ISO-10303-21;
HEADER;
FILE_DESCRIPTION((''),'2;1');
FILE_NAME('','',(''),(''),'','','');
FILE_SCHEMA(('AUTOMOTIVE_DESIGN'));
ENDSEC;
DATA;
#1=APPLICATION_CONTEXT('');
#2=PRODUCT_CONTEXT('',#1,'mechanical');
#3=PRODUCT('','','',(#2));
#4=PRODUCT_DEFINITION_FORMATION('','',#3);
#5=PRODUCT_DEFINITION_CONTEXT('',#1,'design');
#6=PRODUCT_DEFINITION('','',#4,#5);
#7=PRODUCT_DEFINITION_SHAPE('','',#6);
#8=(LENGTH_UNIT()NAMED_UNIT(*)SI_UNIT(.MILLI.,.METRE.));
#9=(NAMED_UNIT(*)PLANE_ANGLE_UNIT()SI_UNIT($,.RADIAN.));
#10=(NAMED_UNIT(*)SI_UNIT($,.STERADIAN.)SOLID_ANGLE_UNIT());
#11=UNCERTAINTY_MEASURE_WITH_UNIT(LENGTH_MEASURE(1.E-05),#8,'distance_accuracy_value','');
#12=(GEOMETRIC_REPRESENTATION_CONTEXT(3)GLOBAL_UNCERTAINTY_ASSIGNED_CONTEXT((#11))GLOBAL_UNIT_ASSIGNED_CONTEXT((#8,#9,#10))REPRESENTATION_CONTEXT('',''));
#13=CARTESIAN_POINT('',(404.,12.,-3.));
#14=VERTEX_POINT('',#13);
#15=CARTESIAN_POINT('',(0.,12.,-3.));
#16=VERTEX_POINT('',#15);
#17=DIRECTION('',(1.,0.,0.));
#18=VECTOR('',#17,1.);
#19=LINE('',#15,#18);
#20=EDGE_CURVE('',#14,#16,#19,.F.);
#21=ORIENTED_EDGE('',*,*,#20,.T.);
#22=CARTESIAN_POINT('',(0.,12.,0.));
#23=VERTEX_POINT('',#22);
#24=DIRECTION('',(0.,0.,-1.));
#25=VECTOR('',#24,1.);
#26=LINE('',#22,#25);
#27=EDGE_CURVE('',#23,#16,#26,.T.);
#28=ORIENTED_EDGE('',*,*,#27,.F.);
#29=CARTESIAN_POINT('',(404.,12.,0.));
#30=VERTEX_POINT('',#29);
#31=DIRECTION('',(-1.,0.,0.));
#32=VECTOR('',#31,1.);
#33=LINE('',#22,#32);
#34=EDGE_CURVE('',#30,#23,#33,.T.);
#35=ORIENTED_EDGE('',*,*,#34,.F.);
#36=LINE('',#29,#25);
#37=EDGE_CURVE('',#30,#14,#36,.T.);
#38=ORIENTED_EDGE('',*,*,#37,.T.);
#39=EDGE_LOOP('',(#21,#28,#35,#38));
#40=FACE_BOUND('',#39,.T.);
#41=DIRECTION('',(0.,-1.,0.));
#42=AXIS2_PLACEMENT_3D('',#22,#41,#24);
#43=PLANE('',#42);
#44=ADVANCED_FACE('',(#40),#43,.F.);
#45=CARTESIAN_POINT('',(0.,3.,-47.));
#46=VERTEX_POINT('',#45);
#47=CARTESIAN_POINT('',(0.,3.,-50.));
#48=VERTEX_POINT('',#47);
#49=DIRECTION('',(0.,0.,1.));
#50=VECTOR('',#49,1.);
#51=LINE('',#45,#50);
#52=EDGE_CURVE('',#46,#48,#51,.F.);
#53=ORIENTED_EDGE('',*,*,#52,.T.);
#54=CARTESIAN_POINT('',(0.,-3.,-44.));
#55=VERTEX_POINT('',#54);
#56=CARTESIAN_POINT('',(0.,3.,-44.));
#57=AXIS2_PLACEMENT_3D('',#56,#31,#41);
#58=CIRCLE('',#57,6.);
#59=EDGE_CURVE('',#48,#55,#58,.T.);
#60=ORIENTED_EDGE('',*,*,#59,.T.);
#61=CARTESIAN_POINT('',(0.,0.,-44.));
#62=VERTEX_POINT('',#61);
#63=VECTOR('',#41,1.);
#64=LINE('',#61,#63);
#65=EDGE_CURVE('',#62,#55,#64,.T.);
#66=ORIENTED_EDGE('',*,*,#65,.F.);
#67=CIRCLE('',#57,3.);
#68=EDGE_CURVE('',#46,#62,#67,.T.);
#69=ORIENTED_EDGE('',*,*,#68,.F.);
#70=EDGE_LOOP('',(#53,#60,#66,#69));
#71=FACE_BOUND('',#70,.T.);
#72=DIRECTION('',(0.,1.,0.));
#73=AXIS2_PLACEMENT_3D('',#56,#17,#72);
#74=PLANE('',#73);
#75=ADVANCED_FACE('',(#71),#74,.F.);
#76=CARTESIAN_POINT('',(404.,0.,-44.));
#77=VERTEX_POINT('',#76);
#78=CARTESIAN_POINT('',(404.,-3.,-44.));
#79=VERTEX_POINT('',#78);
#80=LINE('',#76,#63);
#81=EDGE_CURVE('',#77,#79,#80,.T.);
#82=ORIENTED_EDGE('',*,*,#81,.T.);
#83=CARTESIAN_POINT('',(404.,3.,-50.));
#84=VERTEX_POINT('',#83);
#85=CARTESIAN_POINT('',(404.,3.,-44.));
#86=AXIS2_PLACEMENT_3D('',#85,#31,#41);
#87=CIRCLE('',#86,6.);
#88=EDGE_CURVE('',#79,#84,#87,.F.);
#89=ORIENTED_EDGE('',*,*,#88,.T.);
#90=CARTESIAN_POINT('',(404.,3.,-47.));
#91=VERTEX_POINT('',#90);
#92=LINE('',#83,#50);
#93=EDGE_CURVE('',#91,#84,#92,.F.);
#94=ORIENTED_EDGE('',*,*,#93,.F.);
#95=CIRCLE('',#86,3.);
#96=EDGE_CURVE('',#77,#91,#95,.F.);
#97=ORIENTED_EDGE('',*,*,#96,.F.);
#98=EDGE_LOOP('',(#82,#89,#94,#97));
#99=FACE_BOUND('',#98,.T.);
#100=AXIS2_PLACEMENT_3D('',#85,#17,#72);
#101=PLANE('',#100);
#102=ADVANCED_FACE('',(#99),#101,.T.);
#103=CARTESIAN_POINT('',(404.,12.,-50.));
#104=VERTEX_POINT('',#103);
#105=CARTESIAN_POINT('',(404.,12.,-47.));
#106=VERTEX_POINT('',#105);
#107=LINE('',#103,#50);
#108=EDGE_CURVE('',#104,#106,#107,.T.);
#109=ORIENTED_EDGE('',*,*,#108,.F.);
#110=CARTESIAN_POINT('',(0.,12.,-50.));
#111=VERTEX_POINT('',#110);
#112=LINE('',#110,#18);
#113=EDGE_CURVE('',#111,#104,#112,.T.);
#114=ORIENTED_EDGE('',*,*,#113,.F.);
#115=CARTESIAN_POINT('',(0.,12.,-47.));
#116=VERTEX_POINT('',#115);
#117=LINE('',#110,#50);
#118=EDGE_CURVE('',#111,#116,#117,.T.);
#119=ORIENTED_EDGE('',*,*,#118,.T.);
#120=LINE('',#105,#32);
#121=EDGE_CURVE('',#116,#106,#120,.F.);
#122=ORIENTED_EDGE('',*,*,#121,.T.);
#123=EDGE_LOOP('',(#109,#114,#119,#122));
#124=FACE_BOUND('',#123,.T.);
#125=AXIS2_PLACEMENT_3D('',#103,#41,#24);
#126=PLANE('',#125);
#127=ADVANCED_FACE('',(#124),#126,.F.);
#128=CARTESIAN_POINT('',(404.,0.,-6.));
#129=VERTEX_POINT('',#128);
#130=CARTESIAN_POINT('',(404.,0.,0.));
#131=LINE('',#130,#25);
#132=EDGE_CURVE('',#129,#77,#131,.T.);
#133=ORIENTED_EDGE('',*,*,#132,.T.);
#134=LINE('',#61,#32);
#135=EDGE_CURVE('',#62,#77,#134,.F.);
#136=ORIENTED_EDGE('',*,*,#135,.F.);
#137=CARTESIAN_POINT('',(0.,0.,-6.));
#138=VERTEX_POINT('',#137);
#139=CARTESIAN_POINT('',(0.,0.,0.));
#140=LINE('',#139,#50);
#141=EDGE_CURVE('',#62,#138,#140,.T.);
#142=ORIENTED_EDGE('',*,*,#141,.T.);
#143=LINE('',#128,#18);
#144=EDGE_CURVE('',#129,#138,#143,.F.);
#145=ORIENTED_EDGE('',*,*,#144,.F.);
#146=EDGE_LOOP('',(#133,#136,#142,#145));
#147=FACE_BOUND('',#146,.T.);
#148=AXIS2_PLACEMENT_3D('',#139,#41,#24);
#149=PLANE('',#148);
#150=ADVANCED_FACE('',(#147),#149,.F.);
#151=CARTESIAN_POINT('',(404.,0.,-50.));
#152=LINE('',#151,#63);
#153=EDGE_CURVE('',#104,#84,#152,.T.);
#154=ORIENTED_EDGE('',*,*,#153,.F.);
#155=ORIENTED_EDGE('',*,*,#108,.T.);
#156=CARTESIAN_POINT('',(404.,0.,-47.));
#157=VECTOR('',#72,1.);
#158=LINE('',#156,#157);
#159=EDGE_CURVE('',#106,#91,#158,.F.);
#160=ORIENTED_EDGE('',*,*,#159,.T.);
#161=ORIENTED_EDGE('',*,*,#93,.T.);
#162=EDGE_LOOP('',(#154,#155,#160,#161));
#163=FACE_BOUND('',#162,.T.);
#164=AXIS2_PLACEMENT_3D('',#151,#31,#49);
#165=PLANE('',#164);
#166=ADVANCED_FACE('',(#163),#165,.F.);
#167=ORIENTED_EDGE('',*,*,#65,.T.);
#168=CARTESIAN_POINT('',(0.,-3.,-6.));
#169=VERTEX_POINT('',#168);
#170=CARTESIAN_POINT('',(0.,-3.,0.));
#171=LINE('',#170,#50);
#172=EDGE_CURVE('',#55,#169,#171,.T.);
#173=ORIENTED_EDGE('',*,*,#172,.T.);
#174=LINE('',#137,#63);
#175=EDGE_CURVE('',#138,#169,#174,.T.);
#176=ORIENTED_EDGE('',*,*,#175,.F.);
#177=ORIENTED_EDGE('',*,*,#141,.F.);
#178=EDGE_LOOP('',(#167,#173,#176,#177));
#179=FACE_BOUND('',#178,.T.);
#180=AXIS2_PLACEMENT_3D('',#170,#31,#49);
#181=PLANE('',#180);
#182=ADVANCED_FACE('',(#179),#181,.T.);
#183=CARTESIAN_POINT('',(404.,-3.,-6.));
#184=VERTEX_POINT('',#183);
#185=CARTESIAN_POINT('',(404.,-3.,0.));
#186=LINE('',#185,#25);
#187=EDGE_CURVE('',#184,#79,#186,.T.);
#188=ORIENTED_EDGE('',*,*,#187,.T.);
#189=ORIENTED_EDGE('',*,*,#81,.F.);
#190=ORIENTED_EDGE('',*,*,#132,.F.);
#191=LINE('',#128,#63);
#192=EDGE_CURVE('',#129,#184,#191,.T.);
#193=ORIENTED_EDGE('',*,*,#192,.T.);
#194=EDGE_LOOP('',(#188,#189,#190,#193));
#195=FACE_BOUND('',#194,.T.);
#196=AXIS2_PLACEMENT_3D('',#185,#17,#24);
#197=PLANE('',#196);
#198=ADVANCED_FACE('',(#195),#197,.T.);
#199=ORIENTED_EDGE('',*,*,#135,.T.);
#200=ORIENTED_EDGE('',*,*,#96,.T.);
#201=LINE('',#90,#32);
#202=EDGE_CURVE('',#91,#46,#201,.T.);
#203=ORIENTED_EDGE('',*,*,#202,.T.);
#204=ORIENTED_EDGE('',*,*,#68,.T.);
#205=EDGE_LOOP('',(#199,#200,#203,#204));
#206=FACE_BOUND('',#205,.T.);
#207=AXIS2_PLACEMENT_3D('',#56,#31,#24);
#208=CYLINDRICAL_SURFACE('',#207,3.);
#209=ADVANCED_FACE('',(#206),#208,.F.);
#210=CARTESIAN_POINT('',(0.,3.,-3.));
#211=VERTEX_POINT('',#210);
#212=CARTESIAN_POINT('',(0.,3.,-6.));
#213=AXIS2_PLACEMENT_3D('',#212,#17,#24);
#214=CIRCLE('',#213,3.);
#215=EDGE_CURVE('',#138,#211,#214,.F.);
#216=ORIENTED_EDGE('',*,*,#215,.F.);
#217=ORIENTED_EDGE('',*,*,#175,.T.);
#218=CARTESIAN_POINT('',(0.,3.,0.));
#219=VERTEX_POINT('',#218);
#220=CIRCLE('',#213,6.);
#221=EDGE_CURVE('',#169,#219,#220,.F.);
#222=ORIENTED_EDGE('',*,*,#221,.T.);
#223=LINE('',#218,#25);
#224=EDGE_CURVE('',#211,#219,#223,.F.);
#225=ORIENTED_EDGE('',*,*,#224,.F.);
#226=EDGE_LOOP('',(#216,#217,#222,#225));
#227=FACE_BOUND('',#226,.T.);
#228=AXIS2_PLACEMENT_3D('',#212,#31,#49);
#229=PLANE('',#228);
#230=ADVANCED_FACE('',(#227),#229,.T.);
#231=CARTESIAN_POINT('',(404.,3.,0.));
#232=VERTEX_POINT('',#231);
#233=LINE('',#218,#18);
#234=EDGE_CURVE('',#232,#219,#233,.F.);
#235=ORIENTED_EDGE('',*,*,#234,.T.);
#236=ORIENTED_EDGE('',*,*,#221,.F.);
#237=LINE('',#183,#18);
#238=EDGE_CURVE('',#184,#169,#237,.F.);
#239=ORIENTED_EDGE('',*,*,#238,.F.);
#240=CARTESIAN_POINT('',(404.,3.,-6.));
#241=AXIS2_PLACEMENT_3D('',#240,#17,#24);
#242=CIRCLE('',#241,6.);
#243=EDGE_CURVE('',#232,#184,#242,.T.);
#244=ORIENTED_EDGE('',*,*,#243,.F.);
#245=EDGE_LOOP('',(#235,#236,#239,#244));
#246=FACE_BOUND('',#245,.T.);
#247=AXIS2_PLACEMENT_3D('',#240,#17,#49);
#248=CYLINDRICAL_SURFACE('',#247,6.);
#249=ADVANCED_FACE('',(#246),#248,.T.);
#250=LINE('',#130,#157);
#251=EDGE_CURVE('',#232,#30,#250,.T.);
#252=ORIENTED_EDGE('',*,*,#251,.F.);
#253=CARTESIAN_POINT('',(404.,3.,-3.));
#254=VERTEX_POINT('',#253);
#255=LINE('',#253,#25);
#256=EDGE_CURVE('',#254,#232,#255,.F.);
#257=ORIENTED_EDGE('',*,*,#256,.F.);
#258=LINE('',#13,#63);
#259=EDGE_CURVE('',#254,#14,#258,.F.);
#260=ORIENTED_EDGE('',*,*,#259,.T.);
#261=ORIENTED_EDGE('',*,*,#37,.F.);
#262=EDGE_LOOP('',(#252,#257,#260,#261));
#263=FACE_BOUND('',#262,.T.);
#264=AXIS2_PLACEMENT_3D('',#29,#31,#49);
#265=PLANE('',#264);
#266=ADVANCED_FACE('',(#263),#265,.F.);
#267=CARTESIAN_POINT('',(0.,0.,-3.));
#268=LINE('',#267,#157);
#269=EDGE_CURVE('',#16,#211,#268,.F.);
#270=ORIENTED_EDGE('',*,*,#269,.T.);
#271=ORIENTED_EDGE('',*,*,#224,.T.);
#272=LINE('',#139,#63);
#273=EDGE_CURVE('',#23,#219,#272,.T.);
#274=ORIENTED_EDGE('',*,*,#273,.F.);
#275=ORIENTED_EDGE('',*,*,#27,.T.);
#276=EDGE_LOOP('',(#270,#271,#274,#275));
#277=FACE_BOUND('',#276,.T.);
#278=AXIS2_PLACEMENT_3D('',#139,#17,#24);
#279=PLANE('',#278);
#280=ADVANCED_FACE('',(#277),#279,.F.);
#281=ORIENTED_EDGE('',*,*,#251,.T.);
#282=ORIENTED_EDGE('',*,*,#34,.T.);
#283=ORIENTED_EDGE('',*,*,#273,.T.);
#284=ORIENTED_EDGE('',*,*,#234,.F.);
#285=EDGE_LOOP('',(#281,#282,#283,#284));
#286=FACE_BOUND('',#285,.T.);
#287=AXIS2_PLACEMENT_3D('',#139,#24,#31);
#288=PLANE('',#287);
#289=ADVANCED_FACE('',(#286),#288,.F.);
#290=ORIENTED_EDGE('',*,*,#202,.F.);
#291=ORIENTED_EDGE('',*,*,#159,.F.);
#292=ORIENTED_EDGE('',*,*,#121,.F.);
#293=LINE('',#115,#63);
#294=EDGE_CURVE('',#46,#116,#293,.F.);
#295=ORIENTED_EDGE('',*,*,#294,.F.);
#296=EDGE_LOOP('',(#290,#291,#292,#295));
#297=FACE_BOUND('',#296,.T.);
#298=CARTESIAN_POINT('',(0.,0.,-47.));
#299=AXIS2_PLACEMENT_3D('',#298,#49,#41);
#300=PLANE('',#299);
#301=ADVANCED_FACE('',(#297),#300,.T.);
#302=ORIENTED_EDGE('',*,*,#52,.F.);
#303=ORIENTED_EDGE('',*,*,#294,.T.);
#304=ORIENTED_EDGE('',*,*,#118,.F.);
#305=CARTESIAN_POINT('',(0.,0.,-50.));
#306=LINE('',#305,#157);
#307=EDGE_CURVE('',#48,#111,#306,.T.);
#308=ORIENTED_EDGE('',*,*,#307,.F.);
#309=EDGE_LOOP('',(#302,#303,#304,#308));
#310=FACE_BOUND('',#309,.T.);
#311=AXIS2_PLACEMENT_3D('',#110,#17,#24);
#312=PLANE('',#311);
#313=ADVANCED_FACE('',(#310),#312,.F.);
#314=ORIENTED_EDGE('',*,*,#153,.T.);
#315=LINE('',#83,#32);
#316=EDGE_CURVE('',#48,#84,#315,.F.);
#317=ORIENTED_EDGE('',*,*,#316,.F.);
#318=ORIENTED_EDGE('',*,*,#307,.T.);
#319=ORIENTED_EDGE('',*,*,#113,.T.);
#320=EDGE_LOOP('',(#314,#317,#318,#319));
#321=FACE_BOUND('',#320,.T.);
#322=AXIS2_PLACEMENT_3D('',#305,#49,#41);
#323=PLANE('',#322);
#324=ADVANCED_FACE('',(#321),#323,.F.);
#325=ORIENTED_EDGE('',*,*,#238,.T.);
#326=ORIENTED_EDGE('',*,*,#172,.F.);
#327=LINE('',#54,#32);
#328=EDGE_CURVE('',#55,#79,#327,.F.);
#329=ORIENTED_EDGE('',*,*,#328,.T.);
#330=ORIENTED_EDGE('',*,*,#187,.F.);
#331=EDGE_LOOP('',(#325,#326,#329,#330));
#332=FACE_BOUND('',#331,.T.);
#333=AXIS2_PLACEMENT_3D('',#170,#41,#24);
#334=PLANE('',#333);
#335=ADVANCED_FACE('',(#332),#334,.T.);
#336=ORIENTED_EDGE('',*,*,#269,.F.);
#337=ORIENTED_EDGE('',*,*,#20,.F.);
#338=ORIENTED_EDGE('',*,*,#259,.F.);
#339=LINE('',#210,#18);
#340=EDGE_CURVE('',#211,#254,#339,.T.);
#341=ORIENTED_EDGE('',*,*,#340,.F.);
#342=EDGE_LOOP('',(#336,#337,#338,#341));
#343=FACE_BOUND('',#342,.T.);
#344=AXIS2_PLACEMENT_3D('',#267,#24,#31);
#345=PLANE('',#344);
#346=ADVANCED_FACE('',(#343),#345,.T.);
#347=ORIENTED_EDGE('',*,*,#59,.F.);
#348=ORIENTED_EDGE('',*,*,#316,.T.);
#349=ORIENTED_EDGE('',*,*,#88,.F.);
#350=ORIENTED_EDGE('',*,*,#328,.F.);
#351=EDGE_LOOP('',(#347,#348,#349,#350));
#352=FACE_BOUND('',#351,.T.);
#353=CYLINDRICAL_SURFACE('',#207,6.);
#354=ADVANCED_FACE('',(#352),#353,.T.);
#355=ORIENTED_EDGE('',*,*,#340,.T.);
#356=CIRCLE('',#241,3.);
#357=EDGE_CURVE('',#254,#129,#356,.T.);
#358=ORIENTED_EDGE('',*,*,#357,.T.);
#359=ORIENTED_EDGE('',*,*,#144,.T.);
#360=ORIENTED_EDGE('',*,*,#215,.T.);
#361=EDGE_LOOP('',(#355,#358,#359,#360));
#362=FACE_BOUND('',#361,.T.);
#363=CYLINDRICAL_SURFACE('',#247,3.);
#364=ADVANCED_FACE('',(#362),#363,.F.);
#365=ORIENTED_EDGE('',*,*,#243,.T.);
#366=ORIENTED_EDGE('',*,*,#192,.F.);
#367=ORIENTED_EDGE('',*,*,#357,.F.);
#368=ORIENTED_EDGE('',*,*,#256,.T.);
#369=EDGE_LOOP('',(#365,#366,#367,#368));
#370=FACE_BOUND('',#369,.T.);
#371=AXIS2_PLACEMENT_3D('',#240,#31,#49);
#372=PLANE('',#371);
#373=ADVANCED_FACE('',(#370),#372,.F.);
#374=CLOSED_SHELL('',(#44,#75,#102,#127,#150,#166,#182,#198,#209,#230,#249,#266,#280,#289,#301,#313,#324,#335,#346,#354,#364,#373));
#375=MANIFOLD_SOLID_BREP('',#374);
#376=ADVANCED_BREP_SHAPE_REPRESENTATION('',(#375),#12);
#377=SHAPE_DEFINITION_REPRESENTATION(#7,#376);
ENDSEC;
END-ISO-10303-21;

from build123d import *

# Parameters (mm, degrees)
ESQUISSE2_W                             = 404
ESQUISSE2_H                             = 50
T_LE_DE_BASE_PLI_E1_DEPTH               = 3
T_LE_PLI_E_SUR_AR_TE1_STRIP_W           = 18
T_LE_PLI_E_SUR_AR_TE1_STRIP_H           = 3
T_LE_PLI_E_SUR_AR_TE1_STRIP_CUT_DEPTH   = 404
T_LE_PLI_E_SUR_AR_TE1_STRIP_2_W         = 18
T_LE_PLI_E_SUR_AR_TE1_STRIP_2_H         = 3
T_LE_PLI_E_SUR_AR_TE1_STRIP_CUT_2_DEPTH = 404
T_LE_PLI_E_SUR_AR_TE1_DEPTH             = 404
T_LE_PLI_E_SUR_AR_TE1_BEND_DEPTH        = 404


# Sheet-metal steps are written as plain solids
with BuildPart() as part:
    # Esquisse2 → Tôle de base pliée1 (new body)
    with BuildSketch(Plane(origin=(0, 0, 0), x_dir=(1, 0, 0), z_dir=(0, 1, 0))):
        with Locations((202, 25)):
            Rectangle(ESQUISSE2_W, ESQUISSE2_H)
    extrude(amount=-T_LE_DE_BASE_PLI_E1_DEPTH)

    # Tôle pliée sur arête1 strip (across the edge) → Tôle pliée sur arête1 strip cut (cut)
    with BuildSketch(Plane(origin=(0, 0, 0), x_dir=(0, 0, -1), z_dir=(1, 0, 0))):
        with Locations((-3, -1.5)):
            Rectangle(T_LE_PLI_E_SUR_AR_TE1_STRIP_W, T_LE_PLI_E_SUR_AR_TE1_STRIP_H)
    extrude(amount=T_LE_PLI_E_SUR_AR_TE1_STRIP_CUT_DEPTH, mode=Mode.SUBTRACT)

    # Tôle pliée sur arête1 strip 2 (across the edge) → Tôle pliée sur arête1 strip cut 2 (cut)
    with BuildSketch(Plane(origin=(404, 0, -50), x_dir=(0, 0, 1), z_dir=(-1, 0, 0))):
        with Locations((-3, -1.5)):
            Rectangle(T_LE_PLI_E_SUR_AR_TE1_STRIP_2_W, T_LE_PLI_E_SUR_AR_TE1_STRIP_2_H)
    extrude(amount=T_LE_PLI_E_SUR_AR_TE1_STRIP_CUT_2_DEPTH, mode=Mode.SUBTRACT)

    # Tôle pliée sur arête1 section (across the edge) → Tôle pliée sur arête1 (add)
    with BuildSketch(Plane(origin=(0, 0, 0), x_dir=(0, 0, -1), z_dir=(1, 0, 0))):
        with BuildLine():
            Line((0, 3), (0, 12))
            Line((0, 12), (3, 12))
            Line((3, 12), (3, 3))
            ThreePointArc((3, 3), (3.878679656, 0.878679656), (6, 0))
            Line((6, 0), (6, -3))
            ThreePointArc((6, -3), (1.757359313, -1.242640687), (0, 3))
        make_face()
    extrude(amount=T_LE_PLI_E_SUR_AR_TE1_DEPTH)

    # Tôle pliée sur arête1 section 2 (across the edge) → Tôle pliée sur arête1 bend (add)
    with BuildSketch(Plane(origin=(404, 0, -50), x_dir=(0, 0, 1), z_dir=(-1, 0, 0))):
        with BuildLine():
            Line((0, 3), (0, 12))
            Line((0, 12), (3, 12))
            Line((3, 12), (3, 3))
            ThreePointArc((3, 3), (3.878679656, 0.878679656), (6, 0))
            Line((6, 0), (6, -3))
            ThreePointArc((6, -3), (1.757359313, -1.242640687), (0, 3))
        make_face()
    extrude(amount=T_LE_PLI_E_SUR_AR_TE1_BEND_DEPTH)


solid = part.part
